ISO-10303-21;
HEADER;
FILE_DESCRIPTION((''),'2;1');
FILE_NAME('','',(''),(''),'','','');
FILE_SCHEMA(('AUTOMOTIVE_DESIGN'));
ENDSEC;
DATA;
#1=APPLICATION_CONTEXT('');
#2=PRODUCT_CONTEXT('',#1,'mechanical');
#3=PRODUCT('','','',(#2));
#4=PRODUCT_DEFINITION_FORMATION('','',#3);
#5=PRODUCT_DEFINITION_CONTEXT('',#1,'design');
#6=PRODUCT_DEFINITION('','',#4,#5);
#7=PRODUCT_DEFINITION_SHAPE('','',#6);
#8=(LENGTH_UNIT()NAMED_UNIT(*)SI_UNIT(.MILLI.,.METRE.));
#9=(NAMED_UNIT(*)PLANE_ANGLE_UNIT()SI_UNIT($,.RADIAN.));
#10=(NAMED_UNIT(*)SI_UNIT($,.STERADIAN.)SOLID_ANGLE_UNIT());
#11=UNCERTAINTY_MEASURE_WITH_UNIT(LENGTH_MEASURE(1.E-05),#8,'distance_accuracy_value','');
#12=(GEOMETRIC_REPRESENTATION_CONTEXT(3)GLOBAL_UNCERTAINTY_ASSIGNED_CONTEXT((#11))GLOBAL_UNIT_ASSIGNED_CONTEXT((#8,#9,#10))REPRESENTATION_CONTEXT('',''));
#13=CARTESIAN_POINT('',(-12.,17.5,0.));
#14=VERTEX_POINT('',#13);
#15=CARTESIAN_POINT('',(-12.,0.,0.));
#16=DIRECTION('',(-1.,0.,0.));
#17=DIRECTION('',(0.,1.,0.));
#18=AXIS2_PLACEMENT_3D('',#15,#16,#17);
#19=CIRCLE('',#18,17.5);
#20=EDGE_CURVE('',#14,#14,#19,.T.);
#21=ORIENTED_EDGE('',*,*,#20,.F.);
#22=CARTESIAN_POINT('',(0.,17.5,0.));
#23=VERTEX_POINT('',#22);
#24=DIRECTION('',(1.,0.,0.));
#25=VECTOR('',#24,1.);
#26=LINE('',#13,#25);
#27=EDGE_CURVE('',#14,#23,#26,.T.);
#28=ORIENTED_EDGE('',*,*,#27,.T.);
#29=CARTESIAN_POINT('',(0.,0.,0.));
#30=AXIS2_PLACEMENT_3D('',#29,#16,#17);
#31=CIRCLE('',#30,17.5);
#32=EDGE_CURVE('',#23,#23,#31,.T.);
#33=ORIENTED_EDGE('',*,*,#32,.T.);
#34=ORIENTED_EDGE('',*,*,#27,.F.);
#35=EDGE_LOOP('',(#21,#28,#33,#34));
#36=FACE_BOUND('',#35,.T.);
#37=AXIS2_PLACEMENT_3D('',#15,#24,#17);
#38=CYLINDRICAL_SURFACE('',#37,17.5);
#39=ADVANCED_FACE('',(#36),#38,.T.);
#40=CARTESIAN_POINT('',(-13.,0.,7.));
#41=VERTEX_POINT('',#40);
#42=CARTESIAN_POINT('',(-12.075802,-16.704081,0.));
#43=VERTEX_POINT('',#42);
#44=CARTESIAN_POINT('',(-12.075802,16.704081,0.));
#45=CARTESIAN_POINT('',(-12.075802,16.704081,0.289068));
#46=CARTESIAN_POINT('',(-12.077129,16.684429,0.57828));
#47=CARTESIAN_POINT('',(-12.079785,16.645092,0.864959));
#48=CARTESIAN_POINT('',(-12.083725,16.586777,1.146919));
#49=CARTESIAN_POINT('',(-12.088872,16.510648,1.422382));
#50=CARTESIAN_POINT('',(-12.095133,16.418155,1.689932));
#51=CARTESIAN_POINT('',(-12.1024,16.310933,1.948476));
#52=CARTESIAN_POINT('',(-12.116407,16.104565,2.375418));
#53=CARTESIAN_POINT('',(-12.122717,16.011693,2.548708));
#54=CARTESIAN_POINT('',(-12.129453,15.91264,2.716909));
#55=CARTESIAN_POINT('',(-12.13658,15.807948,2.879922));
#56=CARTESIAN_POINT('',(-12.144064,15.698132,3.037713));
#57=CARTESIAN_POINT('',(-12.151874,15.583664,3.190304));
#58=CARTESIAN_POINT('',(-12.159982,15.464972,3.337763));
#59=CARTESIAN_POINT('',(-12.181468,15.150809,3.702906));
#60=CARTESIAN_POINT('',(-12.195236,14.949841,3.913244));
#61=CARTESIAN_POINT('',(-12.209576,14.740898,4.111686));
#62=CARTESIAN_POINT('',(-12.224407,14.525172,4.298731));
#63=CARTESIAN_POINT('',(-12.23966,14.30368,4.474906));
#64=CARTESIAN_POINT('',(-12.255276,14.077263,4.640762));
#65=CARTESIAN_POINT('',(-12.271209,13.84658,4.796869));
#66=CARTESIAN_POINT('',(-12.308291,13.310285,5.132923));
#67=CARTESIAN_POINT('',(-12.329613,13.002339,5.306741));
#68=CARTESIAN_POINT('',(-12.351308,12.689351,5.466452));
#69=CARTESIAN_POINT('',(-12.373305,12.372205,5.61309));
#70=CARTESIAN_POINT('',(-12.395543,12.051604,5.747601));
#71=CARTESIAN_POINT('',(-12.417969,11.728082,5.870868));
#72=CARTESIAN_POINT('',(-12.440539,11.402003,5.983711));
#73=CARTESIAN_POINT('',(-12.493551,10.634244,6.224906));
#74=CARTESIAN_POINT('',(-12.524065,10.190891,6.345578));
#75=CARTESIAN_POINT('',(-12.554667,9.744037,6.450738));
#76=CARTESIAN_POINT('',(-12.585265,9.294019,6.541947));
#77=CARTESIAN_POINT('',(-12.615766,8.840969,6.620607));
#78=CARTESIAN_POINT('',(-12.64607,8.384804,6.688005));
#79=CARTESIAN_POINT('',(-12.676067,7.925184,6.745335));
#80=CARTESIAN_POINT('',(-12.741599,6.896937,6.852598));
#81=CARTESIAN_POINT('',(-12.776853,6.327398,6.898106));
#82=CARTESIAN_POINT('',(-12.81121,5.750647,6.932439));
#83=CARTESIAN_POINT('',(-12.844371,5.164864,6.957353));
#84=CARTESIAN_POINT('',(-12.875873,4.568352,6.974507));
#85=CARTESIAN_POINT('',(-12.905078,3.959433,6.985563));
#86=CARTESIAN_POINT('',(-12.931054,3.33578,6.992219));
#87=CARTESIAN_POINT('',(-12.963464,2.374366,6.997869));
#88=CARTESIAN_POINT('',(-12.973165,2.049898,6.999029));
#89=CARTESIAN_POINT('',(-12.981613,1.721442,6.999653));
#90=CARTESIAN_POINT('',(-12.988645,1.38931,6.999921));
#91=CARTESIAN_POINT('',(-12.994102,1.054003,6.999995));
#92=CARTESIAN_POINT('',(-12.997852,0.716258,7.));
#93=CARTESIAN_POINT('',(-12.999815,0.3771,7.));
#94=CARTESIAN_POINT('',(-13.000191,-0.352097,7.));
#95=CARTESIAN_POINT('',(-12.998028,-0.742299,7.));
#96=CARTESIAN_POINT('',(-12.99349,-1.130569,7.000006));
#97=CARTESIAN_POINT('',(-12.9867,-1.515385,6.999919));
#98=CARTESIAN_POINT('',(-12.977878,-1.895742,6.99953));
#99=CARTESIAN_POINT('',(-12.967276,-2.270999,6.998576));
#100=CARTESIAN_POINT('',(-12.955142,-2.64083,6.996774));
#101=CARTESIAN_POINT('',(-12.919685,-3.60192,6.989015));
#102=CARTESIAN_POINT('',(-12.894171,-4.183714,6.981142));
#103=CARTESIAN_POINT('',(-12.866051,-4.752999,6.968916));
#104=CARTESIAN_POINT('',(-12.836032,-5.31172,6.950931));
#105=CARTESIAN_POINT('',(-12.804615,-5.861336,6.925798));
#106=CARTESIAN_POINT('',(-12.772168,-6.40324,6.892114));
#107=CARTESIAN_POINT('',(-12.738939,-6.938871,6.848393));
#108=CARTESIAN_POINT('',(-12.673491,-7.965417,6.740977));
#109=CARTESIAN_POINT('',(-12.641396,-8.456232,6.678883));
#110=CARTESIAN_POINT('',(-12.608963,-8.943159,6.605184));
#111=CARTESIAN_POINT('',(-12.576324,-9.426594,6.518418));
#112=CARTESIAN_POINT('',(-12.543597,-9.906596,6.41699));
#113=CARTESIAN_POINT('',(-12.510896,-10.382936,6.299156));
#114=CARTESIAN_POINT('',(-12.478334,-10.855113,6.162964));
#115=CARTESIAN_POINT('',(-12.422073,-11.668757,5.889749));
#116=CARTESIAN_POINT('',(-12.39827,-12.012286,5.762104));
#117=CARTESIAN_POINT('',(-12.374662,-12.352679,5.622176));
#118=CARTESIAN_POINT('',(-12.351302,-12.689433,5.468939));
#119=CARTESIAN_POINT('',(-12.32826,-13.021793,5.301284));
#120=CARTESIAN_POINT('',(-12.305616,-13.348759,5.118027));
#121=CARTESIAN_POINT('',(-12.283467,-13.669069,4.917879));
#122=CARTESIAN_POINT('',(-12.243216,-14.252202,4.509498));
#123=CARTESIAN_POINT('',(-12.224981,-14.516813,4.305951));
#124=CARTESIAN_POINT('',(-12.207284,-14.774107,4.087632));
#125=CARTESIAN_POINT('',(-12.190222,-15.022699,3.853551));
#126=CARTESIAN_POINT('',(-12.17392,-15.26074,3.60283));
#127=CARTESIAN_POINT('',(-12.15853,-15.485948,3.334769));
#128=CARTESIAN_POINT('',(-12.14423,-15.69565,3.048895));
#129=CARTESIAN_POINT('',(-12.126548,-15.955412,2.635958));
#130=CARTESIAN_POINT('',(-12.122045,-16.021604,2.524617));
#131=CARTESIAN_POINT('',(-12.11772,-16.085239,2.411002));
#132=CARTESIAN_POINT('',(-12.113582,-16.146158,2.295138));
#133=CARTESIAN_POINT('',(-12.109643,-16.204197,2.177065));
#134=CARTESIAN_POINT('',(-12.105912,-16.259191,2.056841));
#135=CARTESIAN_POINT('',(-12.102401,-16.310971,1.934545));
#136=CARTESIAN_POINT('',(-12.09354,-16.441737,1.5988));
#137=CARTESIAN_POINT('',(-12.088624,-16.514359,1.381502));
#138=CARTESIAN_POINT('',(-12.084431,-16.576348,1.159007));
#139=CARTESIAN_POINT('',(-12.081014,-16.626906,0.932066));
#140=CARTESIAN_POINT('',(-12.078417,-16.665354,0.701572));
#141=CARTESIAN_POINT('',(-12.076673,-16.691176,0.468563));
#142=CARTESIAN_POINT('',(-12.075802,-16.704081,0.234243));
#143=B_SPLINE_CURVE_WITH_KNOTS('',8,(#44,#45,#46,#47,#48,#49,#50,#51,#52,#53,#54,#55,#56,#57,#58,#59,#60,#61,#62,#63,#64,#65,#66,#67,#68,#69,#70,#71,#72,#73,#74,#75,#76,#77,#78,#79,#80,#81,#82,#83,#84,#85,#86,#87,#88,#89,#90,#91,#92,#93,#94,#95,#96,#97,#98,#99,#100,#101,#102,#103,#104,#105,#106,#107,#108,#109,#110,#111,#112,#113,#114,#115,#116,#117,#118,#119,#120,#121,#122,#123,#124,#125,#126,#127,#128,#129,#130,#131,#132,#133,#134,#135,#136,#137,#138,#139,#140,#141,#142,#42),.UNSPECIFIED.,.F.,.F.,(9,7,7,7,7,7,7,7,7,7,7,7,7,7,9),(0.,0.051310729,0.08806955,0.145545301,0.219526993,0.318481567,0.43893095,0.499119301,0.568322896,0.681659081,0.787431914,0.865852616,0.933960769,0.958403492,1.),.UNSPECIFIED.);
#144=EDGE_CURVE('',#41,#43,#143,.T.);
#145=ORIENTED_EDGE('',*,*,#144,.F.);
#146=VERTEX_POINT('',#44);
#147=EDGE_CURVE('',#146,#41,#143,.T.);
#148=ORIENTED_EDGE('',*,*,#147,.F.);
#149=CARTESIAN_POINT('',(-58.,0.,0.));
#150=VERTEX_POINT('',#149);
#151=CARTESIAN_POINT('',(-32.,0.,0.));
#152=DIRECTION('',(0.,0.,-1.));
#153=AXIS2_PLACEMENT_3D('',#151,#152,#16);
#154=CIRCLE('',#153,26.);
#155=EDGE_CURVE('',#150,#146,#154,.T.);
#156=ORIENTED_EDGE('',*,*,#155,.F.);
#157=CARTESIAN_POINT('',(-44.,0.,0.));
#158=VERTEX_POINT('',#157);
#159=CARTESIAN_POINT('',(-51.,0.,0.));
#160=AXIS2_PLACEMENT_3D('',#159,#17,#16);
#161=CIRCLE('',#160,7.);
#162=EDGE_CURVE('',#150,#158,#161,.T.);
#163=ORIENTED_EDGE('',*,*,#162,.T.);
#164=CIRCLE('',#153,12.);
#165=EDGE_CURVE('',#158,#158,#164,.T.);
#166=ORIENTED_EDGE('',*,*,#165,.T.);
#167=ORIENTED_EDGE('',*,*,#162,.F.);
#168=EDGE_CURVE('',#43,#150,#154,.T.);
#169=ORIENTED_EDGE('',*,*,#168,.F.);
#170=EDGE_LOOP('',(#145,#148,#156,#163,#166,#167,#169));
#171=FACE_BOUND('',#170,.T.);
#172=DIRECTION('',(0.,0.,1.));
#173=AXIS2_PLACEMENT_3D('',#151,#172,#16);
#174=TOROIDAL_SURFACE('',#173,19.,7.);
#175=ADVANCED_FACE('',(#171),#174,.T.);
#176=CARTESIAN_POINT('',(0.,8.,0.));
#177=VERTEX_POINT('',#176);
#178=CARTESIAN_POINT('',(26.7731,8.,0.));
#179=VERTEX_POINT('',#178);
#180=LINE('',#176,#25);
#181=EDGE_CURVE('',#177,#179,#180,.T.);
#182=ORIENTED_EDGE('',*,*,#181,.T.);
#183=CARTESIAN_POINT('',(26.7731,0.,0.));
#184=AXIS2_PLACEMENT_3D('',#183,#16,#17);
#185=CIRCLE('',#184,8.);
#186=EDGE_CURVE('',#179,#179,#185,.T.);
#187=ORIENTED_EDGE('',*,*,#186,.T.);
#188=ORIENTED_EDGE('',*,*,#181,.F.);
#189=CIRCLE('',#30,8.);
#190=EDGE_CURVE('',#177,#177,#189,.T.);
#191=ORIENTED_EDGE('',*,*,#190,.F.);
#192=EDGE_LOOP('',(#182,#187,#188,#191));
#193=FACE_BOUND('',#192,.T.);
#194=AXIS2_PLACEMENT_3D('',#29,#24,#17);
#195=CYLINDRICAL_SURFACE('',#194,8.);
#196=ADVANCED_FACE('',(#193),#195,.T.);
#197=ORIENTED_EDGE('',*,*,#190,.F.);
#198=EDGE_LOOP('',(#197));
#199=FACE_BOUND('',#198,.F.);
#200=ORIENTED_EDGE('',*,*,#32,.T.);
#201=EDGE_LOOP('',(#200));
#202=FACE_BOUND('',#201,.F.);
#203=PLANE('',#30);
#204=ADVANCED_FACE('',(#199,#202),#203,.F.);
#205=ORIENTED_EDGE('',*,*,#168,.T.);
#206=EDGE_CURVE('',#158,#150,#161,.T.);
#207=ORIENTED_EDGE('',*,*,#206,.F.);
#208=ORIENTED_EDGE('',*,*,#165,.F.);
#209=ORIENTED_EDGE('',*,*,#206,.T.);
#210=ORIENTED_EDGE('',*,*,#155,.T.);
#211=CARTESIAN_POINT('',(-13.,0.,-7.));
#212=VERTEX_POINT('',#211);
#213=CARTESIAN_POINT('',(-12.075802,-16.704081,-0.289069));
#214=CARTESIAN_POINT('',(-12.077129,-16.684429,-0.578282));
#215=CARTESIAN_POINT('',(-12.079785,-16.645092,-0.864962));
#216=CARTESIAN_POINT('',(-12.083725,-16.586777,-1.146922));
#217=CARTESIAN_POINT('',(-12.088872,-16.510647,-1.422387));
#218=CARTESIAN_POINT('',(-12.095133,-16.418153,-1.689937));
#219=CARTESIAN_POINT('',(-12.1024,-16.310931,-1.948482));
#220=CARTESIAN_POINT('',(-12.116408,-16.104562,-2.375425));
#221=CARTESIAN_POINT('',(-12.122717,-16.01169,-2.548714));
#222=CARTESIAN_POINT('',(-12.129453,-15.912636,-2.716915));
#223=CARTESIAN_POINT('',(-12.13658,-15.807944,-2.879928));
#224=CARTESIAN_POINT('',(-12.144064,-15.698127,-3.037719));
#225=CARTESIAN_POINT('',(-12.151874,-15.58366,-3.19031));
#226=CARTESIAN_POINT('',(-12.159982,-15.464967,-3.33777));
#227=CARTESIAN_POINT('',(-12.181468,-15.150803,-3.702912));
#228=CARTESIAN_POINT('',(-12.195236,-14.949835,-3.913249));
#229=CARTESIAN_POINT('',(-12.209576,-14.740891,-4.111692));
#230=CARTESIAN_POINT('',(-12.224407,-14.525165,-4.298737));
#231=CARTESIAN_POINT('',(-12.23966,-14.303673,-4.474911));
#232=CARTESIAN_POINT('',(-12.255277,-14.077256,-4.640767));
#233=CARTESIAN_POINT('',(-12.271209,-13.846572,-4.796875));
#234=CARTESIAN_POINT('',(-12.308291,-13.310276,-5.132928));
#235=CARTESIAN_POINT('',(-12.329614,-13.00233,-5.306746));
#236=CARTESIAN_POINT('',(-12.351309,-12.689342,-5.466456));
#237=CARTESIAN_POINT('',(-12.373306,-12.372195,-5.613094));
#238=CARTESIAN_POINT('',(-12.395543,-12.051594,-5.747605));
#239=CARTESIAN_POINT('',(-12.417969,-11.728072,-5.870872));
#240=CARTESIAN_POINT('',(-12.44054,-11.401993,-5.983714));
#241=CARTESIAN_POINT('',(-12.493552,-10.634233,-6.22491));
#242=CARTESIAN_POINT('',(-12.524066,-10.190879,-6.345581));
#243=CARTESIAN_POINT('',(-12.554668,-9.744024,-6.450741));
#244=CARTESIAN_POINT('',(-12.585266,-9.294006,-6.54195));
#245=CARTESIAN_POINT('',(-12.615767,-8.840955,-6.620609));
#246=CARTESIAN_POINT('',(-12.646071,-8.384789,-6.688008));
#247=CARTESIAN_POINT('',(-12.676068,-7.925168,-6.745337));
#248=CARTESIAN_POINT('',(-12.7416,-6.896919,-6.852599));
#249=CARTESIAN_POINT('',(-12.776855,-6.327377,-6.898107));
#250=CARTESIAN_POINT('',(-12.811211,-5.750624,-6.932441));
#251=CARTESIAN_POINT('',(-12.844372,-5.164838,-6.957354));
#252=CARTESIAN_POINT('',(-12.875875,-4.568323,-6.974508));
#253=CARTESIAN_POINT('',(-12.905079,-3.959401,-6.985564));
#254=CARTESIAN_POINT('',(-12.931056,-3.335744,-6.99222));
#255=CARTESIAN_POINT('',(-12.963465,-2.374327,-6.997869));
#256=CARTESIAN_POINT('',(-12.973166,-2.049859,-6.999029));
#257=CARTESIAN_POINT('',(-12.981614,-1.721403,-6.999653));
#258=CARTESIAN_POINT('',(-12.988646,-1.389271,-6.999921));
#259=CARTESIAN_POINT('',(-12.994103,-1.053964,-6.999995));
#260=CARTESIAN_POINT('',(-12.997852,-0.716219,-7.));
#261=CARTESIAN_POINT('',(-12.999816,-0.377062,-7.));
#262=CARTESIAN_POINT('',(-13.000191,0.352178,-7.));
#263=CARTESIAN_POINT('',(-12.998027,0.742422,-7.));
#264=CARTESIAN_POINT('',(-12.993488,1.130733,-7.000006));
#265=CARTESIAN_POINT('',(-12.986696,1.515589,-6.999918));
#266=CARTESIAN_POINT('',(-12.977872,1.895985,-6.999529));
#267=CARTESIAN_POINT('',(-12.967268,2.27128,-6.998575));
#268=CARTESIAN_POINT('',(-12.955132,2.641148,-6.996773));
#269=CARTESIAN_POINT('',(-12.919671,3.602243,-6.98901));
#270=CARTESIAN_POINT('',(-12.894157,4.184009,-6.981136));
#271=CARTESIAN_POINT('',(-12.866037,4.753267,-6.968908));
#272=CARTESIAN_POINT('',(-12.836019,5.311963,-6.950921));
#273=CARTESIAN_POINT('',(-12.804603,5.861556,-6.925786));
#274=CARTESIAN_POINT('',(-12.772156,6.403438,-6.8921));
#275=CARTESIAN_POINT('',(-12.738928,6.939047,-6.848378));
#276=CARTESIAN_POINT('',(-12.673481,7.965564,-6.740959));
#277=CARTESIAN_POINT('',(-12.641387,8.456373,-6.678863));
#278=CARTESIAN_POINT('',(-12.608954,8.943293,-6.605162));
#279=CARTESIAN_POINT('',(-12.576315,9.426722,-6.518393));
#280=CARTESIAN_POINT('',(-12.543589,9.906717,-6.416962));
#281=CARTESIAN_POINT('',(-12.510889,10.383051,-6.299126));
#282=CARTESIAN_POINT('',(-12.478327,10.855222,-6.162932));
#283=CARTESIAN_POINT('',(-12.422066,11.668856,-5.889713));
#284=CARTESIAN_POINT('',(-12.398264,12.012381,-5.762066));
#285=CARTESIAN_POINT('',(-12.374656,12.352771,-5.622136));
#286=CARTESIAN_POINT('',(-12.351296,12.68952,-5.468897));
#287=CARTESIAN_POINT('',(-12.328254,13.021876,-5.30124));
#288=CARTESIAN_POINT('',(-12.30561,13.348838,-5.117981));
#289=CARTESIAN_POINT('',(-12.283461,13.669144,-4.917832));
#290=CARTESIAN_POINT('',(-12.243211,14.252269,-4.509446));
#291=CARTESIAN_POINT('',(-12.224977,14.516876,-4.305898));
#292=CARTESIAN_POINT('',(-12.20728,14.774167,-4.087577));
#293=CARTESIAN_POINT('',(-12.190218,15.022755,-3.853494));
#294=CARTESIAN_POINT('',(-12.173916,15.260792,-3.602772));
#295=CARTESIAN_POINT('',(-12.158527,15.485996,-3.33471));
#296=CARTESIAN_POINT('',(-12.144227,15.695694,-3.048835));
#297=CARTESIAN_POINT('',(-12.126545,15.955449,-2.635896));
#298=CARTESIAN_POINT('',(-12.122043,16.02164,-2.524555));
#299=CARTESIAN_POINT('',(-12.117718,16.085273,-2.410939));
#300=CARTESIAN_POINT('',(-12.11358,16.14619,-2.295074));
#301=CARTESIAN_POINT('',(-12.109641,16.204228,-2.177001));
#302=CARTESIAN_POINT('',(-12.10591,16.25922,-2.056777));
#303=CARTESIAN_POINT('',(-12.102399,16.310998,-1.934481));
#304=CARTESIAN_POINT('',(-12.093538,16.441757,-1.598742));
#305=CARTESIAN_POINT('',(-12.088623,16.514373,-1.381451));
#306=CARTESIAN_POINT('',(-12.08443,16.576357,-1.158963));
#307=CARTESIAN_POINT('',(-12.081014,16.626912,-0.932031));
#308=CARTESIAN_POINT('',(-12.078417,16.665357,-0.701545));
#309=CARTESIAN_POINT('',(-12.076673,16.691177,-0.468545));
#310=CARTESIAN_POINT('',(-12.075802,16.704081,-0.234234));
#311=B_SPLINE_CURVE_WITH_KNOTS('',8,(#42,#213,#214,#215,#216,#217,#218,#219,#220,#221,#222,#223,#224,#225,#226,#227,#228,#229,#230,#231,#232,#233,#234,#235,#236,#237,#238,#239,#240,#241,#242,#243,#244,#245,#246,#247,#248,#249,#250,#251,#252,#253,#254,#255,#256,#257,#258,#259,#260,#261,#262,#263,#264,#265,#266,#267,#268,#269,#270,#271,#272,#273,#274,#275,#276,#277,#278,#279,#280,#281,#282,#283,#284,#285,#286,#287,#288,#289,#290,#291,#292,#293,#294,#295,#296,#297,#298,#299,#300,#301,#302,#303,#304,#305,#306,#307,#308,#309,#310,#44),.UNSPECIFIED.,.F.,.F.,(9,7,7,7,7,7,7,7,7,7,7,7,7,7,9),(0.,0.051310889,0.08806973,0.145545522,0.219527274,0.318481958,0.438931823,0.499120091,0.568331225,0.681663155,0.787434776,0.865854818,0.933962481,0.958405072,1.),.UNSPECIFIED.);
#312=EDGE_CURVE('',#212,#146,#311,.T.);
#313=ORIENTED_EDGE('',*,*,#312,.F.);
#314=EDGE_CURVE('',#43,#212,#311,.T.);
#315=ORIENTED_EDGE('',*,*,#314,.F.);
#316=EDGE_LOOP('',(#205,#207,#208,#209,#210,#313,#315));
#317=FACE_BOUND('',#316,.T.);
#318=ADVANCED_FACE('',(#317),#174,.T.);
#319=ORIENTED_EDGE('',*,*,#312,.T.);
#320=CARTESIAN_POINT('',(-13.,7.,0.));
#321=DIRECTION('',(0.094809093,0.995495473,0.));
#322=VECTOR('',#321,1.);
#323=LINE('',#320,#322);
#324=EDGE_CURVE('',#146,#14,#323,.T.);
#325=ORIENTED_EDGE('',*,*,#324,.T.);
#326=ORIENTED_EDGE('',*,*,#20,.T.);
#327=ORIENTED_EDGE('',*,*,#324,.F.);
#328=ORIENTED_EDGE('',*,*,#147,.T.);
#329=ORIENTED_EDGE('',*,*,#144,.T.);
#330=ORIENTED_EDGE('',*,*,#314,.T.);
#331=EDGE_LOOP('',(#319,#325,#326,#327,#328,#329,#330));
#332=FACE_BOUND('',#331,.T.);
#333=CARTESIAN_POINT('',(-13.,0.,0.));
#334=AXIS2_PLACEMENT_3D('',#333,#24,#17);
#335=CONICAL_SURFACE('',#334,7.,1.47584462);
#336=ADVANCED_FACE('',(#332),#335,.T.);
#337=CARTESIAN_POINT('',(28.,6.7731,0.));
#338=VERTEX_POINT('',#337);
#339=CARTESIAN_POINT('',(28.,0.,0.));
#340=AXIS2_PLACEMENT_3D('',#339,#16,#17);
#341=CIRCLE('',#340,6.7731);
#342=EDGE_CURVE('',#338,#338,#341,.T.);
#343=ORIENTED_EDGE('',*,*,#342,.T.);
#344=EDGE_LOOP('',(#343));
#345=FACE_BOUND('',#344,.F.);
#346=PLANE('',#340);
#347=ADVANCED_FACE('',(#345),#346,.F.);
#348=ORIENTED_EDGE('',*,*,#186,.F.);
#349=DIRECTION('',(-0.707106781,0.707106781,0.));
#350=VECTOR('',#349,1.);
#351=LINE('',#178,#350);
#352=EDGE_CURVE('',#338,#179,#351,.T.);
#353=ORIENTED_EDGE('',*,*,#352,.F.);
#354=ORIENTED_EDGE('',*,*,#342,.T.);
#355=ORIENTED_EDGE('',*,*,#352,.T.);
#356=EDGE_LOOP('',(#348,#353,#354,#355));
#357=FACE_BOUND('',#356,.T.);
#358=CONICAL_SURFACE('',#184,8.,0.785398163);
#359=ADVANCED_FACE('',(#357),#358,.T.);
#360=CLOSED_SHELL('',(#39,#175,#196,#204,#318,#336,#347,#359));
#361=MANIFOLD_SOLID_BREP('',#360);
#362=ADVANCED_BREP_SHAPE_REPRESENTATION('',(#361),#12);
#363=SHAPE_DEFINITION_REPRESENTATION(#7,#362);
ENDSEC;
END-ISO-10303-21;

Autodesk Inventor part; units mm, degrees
ref_plane "YZ Plane" through (0, 0, 0) normal (1, 0, 0) x (0, 1, 0)
sketch "Szkic1" plane through (0, 0, 0) normal (0, 0, 1) x (1, 0, 0)
  line L0 (-13, 0) -> (-13, 7)
  line L1 (-13, 7) -> (-12, 17.5)
  line L2 (-12, 17.5) -> (0, 17.5)
  line L3 (0, 17.5) -> (0, 8)
  line L4 (0, 8) -> (28, 8)
  line L5 (28, 8) -> (28, 0)
  line L6 (28, 0) -> (-13, 0)
  line L7 (-21.2, 0) -> (36.2, 0) projected
  line L8 (0, -3.5) -> (0, 21) projected
  dimension "d0" = 16
  dimension "d1" = 35
  dimension "d2" = 28
  dimension "d3" = 12
  dimension "d4" = 14
  dimension "d15" = 13
revolve "Bryła" add sketch "Szkic1" angle 360 about axis through (28, 0, 0) along (-1, 0, 0)
thread "Gwint1" size "M16x2" class "6g" standard "ISO Metric profile" length 24
chamfer "Faza1" distance 1.2269 distance2 1.2269 1 edges at (28, -8, 0) measured on face at (28, 2.3612, -1.2393)
sketch "Szkic2" plane through (0, 0, 0) normal (0, 1, 0) x (-1, 0, 0)
  line L0 (69.6, 0) -> (-11.6, 0) projected
  line L1 (0, -9.8) -> (0, 9.8) projected
  circle A0 centre (51, 0) radius 7
  line L2 (51, 7) -> (0, 7) construction
  line L3 (51, -7) -> (0, -7) construction
  line L4 (32, 7) -> (32, -7)
  dimension "d12" = 14
  dimension "d13" = 58
  dimension "d14" = 32
revolve "Oczko" add sketch "Szkic2" angle 360 about axis through (-32, 0, 7) along (0, 0, -1)
ref_plane "Work Plane1" through (14, 0, 0) normal (0, 1, 0) x (1, 0, 0)
ref_plane "Work Plane2" through (14, 0, 0) normal (0, 0, 1) x (1, 0, 0)
equation "\"d0\" = GD"
equation "\"d1\" = LADI"
equation "\"d2\" = NLG"
equation "\"d3\" = KOH1"
equation "\"d4\" = SDR1"
equation "\"d15\" = -SD1 + KOH - 1.5 * SDR1"
equation "\"d5\" = GEL"
equation "\"d7\" = -0.5 * GD1 + 0.5 * GD"
equation "\"d8\" = GUL"
equation "\"d12\" = SDR1"
equation "\"d13\" = KOH"
equation "\"d14\" = DSH"
equation "\"NLG\" = 28"
equation "\"GD\" = NND"
equation "\"LADI\" = 35"
equation "\"KOH1\" = 12"
equation "\"KOH\" = 58"
equation "\"DSH\" = 32"
equation "\"GEL\" = 24"
equation "\"GD1\" = THREADDIA - 1.2269 * PTC"
equation "\"GUL\" = 0.61345 * PTC"
equation "\"SDR1\" = 14"
equation "\"SD1\" = 24"
equation "\"PTC\" = 2"
equation "\"GAL\" = 0.61345 * PTC"
equation "\"THREADDIA\" = 16"
equation "\"SDR2\" = SDR1"
equation "\"TOA\" = 30deg"
equation "\"RR\" = 12"
equation "\"RR2\" = 1"
equation "\"NND\" = 16"
equation "\"GAL2\" = 4"
equation "\"SD2\" = 52"
properties part number "AS 2317 - M16" material "Stal, miękka"
